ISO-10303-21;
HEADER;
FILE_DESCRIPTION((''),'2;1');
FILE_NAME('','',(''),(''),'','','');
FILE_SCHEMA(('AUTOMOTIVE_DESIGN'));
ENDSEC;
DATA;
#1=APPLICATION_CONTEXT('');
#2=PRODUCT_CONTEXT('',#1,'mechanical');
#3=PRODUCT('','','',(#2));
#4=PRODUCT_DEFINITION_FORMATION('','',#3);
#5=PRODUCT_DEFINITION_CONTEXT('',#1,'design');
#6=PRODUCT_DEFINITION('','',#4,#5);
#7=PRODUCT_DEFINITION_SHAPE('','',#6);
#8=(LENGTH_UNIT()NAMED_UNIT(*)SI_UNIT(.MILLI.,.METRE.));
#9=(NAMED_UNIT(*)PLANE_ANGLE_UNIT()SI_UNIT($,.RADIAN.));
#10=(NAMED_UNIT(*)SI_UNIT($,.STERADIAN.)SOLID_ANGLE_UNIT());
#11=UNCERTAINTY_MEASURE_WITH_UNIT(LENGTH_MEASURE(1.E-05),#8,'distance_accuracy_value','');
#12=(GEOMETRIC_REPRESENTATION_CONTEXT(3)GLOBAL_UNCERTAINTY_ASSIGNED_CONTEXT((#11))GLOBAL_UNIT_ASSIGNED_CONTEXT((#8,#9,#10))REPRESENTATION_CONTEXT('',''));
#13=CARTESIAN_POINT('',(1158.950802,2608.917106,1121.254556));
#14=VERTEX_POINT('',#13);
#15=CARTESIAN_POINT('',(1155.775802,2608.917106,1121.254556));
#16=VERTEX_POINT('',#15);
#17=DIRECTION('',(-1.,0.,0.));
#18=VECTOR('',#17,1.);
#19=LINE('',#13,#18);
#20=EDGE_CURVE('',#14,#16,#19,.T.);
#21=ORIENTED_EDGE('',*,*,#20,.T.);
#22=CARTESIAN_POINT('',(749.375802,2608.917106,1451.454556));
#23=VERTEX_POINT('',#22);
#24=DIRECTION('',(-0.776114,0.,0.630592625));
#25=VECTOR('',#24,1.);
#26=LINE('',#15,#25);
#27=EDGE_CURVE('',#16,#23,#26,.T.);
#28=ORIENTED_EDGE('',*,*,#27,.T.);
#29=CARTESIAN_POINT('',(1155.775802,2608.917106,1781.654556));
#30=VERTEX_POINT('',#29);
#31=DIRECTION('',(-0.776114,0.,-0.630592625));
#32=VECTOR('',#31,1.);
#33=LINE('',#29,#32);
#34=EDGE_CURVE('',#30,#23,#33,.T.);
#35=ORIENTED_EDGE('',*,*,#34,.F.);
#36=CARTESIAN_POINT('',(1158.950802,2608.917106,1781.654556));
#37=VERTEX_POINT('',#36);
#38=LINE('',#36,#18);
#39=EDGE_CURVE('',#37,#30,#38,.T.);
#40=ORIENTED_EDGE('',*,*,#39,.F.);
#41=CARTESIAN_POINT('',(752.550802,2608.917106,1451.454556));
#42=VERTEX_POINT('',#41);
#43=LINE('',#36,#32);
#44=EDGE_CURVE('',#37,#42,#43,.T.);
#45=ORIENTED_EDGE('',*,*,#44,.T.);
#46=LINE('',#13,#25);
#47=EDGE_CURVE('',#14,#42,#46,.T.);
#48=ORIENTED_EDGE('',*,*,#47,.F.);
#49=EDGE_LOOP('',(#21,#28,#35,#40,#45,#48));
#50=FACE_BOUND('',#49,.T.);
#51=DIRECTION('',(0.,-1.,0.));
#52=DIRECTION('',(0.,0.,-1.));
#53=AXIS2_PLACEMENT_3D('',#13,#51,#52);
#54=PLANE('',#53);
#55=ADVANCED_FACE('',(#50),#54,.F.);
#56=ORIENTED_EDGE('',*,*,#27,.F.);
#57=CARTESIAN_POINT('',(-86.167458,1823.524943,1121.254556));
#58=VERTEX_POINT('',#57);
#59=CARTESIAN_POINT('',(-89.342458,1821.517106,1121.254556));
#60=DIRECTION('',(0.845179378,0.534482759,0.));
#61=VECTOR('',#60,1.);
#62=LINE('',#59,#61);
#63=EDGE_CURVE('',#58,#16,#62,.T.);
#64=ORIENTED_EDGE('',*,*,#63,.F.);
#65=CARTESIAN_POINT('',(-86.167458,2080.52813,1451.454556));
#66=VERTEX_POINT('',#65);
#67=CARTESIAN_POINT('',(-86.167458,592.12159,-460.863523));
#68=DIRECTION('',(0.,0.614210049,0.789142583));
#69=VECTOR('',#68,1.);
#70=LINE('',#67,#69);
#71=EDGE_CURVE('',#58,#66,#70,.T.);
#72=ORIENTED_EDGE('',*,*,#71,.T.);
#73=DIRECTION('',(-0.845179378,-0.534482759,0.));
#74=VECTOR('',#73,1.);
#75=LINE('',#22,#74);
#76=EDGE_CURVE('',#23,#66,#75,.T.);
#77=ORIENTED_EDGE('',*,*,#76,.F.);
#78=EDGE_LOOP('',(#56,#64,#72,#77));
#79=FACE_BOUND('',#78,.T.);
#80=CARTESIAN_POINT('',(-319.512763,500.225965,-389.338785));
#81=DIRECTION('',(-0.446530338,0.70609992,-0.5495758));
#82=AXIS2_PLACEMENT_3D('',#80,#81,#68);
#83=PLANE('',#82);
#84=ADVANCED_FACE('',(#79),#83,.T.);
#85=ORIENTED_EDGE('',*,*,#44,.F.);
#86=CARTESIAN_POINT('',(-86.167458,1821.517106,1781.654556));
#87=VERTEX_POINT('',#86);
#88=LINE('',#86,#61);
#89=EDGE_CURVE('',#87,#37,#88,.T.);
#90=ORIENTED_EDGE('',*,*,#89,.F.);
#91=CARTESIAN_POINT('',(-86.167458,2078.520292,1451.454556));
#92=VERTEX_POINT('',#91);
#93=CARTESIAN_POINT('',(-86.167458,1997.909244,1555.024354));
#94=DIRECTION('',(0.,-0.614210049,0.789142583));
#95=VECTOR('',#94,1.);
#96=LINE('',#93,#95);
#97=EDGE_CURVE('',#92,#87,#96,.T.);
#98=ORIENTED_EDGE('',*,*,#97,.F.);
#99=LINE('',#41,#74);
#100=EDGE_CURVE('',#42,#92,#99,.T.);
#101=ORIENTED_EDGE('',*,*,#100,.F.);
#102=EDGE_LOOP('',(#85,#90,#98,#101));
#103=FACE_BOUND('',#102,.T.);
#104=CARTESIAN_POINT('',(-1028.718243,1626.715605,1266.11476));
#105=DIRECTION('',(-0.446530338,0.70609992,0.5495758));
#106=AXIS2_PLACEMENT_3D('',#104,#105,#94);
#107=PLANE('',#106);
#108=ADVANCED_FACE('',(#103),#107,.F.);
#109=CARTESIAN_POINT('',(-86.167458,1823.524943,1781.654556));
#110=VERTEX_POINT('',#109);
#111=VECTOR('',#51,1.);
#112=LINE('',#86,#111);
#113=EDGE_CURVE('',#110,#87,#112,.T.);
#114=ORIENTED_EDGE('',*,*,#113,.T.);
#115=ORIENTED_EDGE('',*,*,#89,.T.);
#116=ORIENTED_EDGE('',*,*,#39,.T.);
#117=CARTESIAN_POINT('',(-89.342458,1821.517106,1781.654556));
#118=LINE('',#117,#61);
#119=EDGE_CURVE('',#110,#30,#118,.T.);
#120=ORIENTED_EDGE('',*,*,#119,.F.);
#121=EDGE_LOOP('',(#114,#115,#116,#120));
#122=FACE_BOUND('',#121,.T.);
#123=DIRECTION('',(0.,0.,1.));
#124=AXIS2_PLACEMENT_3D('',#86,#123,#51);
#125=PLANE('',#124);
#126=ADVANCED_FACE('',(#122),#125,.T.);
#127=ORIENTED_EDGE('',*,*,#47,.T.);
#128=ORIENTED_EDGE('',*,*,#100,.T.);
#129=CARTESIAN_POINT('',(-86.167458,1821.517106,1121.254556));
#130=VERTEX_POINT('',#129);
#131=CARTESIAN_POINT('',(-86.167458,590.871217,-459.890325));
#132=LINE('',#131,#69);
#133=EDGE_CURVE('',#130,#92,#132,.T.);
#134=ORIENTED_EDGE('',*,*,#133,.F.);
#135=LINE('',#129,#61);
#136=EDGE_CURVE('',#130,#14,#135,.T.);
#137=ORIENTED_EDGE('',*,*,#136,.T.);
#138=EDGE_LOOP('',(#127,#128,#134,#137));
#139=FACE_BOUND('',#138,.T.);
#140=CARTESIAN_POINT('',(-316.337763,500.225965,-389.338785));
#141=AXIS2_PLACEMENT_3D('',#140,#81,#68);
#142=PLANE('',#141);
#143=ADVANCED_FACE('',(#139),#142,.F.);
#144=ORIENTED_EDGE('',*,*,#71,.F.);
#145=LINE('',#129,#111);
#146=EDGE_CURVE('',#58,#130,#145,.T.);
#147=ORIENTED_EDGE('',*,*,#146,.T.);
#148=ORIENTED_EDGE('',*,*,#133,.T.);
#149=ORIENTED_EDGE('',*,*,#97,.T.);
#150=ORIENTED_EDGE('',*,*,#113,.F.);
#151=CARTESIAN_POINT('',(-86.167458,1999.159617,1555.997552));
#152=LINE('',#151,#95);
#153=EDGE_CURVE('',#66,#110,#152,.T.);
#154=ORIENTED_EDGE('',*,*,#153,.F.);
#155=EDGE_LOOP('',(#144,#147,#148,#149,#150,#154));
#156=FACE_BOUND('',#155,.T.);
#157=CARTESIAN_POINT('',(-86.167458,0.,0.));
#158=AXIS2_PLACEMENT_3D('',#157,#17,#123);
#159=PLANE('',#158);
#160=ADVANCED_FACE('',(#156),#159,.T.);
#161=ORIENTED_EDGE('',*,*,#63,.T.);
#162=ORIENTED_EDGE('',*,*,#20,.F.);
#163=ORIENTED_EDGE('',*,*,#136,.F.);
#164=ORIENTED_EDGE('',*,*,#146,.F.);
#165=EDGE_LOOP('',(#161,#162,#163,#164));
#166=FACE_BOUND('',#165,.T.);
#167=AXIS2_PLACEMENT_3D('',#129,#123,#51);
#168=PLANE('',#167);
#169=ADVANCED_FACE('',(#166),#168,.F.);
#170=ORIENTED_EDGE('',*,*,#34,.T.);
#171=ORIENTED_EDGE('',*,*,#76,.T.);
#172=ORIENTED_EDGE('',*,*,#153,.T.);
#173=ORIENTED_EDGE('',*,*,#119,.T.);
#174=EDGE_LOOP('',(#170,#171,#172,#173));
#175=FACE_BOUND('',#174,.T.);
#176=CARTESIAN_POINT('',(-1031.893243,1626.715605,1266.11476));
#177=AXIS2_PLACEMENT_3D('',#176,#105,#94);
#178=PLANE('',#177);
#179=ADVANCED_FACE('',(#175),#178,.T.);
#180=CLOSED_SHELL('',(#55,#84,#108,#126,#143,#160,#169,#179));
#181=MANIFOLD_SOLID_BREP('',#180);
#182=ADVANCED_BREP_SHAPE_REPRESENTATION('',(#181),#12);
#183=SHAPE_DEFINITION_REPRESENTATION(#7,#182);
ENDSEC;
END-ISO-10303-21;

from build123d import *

# Parameters (mm, degrees)
SKETCH5_W          = 850.532199311
SKETCH5_H          = 887.458344
CUT_EXTRUDE5_DEPTH = 406.4


with BuildPart() as part:
    # Boss-Extrude1: read off the stored shape, not the designer's step
    # Boss-Extrude1: loft between two sections, ruled curve by curve
    boss_extrude1_from = [
        Edge.make_line((-86.167457674, 1821.517106037, 1121.25455637), (-492.567457674, 1821.517106037, 1451.45455637)),
        Edge.make_line((-492.567457674, 1821.517106037, 1451.45455637), (752.550801769, 2608.917106037, 1451.45455637)),
        Edge.make_line((752.550801769, 2608.917106037, 1451.45455637), (1158.950801769, 2608.917106037, 1121.25455637)),
        Edge.make_line((1158.950801769, 2608.917106037, 1121.25455637), (-86.167457674, 1821.517106037, 1121.25455637)),
    ]
    boss_extrude1_to = [
        Edge.make_line((-89.342457674, 1821.517106037, 1121.25455637), (-495.742457674, 1821.517106037, 1451.45455637)),
        Edge.make_line((-495.742457674, 1821.517106037, 1451.45455637), (749.375801769, 2608.917106037, 1451.45455637)),
        Edge.make_line((749.375801769, 2608.917106037, 1451.45455637), (1155.775801769, 2608.917106037, 1121.25455637)),
        Edge.make_line((1155.775801769, 2608.917106037, 1121.25455637), (-89.342457674, 1821.517106037, 1121.25455637)),
    ]
    boss_extrude1 = Solid(Shell([*[Face.make_surface_from_curves(boss_extrude1_from[k], boss_extrude1_to[k]) for k in range(4)], Face(Wire(boss_extrude1_from)), Face(Wire(boss_extrude1_to))]))
    add(boss_extrude1)

    # Mirror1: Boss-Extrude1 across plane
    add(boss_extrude1.mirror(Plane.XY.offset(1451.45455637)))

    # Sketch5 → Cut-Extrude5 (cut, symmetric)
    with BuildSketch(Plane(origin=(-492.567457674, 0, 0), x_dir=(0, 0, -1), z_dir=(1, 0, 0))):
        with Locations((-1421.298204875, 2221.371463485)):
            Rectangle(SKETCH5_W, SKETCH5_H)
    extrude(amount=CUT_EXTRUDE5_DEPTH, both=True, mode=Mode.SUBTRACT)


solid = part.part
